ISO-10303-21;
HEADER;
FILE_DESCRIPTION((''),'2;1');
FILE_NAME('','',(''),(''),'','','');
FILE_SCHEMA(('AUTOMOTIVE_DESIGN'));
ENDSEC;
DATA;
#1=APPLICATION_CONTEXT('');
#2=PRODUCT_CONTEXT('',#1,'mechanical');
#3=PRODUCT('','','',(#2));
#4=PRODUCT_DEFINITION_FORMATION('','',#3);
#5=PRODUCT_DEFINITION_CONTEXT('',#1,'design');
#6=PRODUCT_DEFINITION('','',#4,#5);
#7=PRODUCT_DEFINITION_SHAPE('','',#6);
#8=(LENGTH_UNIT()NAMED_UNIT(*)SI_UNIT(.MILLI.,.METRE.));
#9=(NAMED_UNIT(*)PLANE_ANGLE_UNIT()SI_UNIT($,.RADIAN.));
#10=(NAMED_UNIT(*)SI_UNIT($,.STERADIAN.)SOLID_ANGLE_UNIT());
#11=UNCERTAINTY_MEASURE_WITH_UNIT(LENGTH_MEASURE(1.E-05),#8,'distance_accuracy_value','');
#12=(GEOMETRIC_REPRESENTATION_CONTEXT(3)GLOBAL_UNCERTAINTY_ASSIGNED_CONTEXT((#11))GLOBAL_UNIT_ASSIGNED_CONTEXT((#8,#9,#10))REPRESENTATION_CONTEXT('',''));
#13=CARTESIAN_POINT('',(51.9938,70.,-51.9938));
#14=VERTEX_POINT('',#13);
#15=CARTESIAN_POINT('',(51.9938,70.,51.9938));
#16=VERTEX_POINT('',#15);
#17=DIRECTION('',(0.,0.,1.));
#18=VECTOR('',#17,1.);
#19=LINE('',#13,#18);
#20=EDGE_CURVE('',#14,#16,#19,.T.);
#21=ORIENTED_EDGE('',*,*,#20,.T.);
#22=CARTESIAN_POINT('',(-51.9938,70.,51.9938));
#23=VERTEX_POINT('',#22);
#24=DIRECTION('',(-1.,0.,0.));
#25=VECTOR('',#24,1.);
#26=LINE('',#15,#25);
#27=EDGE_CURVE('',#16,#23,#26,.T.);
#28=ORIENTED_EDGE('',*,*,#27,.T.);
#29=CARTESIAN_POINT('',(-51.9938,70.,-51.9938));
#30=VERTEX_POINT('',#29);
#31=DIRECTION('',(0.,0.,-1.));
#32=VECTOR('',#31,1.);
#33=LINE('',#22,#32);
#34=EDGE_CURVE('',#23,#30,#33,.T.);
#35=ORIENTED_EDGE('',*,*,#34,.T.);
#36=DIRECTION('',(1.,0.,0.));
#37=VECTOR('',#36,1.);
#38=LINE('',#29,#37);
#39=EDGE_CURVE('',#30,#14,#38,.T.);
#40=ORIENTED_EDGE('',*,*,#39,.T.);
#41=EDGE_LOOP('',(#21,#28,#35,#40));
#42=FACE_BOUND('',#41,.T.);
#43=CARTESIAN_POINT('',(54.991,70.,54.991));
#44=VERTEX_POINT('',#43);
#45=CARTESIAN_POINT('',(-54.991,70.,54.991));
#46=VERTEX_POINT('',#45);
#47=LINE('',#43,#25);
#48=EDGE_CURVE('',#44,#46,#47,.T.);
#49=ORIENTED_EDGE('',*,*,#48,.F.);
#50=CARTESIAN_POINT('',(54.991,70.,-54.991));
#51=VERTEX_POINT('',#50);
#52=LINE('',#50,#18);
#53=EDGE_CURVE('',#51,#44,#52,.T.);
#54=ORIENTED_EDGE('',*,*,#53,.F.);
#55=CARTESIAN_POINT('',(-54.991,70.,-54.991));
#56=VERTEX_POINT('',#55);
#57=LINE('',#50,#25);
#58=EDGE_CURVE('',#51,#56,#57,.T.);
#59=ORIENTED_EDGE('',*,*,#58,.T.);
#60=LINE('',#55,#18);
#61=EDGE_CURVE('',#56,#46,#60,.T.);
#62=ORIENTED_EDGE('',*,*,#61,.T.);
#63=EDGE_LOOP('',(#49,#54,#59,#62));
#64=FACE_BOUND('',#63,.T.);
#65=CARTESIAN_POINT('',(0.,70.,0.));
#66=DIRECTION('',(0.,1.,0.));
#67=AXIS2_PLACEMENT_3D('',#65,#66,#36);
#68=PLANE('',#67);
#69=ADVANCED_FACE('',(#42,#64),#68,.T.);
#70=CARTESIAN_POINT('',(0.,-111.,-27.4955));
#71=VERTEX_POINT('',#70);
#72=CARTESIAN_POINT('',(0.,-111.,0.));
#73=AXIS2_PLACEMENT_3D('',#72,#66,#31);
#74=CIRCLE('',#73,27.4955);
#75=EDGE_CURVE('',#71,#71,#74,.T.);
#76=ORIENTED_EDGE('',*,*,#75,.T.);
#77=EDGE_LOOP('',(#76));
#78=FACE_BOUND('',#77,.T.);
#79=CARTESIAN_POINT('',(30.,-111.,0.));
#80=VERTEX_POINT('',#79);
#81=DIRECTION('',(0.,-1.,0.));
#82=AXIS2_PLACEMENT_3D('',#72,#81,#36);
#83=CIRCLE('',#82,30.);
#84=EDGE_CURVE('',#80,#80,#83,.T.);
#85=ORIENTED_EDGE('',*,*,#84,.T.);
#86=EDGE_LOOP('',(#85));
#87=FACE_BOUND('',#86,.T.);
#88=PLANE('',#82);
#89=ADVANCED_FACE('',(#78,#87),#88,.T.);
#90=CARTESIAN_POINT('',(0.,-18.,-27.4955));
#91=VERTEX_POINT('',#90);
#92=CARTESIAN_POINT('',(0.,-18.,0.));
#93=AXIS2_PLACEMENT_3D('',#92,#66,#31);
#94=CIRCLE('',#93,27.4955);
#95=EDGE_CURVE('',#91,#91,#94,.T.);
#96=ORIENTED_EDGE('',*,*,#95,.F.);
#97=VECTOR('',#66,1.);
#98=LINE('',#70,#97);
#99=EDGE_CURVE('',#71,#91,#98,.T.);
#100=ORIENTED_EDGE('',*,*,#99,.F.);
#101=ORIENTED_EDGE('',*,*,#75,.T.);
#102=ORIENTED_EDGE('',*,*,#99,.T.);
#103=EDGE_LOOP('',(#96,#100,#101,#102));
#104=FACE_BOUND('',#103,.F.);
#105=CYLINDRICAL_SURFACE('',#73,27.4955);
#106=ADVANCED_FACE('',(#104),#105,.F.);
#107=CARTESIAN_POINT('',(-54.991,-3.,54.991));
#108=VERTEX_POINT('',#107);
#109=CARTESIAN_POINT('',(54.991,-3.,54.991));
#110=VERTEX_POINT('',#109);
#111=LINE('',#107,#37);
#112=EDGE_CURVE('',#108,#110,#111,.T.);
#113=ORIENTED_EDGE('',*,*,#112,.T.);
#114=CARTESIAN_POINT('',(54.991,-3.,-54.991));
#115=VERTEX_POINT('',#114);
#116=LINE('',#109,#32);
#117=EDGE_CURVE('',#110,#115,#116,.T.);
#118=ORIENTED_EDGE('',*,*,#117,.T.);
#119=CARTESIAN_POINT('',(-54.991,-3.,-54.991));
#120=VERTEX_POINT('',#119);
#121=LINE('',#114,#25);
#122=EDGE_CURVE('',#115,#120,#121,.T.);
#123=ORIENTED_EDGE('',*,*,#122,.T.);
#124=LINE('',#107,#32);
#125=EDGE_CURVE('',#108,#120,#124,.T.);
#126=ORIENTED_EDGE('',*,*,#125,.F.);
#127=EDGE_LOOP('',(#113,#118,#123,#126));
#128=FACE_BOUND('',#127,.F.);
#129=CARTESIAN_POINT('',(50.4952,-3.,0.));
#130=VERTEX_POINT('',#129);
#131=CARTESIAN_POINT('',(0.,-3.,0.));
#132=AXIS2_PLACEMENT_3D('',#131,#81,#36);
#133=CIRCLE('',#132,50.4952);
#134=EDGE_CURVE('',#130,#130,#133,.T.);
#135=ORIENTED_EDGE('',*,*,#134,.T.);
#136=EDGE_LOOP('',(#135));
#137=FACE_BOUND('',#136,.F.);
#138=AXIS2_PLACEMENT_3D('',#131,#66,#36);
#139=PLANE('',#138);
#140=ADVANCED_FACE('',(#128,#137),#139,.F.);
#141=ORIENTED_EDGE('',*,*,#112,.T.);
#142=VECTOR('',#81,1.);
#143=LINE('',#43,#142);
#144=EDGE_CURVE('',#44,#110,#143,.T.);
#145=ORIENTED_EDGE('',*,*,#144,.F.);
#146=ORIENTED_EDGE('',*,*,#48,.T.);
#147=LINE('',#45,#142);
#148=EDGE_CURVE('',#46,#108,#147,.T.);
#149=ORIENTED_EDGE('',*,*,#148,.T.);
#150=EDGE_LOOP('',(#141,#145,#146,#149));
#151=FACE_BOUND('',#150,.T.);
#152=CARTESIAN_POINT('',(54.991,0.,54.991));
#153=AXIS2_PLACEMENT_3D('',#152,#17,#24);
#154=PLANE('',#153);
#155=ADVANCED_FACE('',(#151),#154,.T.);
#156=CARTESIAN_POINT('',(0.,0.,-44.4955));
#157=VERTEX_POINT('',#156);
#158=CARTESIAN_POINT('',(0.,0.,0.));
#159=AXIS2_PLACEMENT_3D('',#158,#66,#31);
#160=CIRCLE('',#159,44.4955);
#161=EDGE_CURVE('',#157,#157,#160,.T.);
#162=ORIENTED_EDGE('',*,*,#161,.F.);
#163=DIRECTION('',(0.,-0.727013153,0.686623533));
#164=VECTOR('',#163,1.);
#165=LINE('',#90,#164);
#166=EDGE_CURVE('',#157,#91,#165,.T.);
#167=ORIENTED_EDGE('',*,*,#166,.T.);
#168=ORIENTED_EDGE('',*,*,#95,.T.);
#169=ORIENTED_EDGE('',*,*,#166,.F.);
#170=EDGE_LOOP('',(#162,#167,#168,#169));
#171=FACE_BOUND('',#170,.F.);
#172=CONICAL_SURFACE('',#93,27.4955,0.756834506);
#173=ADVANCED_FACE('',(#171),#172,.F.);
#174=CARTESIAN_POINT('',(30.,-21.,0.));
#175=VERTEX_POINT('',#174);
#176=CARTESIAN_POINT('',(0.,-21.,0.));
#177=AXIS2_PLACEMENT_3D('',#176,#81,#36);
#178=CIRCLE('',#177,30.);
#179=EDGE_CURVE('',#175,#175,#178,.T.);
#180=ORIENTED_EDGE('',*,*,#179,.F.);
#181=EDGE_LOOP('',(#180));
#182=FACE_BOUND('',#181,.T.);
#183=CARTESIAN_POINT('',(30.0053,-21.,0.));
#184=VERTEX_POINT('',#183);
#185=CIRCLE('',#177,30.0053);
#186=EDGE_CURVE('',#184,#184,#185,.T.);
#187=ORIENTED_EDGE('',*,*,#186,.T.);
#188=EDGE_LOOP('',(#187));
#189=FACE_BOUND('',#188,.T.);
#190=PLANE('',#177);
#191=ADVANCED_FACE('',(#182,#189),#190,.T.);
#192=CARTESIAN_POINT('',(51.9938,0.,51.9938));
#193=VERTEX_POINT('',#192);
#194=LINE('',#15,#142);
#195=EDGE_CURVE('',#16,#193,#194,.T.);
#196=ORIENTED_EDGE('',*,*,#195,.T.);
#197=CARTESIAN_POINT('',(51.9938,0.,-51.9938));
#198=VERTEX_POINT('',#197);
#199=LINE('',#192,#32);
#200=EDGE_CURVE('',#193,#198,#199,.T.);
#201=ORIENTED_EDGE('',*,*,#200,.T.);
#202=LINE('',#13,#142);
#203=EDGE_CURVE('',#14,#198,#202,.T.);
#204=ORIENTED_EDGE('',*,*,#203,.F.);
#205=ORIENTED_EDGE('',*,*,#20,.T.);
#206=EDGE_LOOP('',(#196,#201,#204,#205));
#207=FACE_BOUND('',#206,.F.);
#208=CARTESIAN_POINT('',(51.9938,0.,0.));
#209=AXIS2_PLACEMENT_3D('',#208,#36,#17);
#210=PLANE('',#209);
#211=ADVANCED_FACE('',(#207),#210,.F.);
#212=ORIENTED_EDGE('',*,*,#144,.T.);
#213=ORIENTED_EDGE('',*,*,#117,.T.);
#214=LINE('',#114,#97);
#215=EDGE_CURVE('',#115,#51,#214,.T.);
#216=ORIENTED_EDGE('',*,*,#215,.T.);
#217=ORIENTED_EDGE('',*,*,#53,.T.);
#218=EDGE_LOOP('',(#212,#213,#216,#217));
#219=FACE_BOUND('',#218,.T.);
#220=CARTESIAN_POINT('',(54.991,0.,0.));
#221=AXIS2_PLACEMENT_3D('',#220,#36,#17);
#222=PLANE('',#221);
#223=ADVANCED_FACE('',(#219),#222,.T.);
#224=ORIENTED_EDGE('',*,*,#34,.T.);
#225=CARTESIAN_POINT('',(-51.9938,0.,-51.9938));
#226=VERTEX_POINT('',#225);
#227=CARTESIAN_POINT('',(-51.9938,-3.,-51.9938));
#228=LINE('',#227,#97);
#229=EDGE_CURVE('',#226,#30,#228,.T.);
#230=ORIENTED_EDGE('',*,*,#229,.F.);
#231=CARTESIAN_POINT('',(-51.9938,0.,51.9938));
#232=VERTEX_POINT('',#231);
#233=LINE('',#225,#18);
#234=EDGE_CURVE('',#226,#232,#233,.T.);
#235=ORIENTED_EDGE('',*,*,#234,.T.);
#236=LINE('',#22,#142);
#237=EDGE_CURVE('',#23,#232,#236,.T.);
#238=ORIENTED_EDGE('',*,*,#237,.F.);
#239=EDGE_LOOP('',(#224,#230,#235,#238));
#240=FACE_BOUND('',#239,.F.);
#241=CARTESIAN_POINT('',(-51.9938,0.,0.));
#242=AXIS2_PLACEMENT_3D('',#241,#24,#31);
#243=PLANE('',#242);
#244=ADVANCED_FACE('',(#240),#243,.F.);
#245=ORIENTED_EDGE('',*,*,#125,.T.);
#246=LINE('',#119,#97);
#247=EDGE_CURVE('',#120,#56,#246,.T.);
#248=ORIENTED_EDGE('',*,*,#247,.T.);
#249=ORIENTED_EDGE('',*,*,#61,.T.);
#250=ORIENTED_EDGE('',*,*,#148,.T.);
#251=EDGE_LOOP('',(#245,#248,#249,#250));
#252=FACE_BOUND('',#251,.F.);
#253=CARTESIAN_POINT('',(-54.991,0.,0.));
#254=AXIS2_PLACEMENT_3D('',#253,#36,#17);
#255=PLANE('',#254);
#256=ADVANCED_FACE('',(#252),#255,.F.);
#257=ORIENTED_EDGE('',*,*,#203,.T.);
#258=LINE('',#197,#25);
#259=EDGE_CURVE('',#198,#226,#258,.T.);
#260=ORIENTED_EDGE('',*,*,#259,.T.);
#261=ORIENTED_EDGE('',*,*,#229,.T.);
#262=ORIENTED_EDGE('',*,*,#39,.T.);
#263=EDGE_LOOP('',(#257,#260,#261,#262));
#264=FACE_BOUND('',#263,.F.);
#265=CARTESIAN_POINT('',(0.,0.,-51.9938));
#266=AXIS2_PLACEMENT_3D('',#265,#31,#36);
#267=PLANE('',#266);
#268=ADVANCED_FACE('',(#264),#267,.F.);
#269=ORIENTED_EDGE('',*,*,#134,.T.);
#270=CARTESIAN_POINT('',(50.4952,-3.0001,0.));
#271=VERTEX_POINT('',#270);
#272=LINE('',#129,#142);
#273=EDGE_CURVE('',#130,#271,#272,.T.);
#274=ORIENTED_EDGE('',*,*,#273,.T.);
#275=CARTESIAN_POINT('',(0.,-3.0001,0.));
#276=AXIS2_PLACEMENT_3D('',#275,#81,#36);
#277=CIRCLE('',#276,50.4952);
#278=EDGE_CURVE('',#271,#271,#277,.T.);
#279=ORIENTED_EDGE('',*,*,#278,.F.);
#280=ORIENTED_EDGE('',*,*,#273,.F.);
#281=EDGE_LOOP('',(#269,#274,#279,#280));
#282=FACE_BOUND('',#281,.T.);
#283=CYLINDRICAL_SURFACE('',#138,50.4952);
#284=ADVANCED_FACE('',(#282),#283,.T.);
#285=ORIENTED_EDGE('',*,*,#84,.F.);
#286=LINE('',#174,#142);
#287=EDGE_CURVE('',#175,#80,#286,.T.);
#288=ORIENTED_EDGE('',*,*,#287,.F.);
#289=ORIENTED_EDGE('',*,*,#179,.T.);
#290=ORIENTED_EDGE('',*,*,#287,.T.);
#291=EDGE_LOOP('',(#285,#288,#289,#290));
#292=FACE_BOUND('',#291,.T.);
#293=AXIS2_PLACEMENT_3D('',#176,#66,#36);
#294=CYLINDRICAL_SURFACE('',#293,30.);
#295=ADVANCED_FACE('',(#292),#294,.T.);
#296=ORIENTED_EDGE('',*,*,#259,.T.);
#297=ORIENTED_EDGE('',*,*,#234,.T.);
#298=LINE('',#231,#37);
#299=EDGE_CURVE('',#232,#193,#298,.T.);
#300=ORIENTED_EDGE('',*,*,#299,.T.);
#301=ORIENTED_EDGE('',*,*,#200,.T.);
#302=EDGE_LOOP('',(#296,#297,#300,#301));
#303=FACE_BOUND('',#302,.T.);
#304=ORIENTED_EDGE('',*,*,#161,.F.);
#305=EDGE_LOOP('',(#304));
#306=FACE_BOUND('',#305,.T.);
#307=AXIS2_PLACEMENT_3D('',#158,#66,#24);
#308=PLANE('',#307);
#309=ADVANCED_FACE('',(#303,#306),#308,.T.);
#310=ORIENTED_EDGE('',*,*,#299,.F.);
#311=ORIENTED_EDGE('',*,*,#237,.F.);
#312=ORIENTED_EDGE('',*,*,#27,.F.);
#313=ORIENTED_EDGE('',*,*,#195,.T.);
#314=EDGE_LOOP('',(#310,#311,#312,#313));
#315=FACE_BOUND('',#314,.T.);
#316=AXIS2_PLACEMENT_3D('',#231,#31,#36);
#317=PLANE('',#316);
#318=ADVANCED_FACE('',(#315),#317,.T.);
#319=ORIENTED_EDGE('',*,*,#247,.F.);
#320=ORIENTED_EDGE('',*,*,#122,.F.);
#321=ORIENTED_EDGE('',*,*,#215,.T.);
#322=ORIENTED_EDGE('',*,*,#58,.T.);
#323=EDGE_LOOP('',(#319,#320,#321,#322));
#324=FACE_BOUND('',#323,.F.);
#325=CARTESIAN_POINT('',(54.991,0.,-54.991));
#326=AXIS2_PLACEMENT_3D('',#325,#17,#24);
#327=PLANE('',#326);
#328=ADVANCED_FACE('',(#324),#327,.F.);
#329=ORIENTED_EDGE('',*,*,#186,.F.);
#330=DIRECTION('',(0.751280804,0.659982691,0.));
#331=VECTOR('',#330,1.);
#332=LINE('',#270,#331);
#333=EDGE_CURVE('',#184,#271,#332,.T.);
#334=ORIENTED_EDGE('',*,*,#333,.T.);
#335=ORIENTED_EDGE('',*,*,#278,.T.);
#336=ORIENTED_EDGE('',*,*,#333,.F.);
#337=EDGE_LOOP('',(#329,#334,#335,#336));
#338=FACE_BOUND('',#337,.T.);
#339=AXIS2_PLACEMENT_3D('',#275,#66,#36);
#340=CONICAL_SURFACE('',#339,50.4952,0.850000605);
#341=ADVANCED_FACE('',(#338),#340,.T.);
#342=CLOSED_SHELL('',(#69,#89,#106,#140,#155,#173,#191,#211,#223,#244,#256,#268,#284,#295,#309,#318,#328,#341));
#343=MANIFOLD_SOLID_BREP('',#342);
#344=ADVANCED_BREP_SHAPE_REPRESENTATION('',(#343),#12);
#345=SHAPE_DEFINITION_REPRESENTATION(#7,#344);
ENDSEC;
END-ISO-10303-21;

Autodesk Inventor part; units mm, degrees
ref_plane "YZ Plane" through (0, 0, 0) normal (1, 0, 0) x (0, 1, 0)
ref_plane "XZ Plane" through (0, 0, 0) normal (0, 1, 0) x (-1, 0, 0)
ref_plane "XY Plane" through (0, 0, 0) normal (0, 0, 1) x (1, 0, 0)
sketch "Sketch1" plane through (0, 0, 0) normal (0, 1, 0) x (-1, 0, 0)
  line L0 (-51.9938, 0) -> (-51.9938, 51.9938)
  line L1 (-51.9938, 51.9938) -> (0, 51.9938)
  line L2 (51.9938, 0) -> (51.9938, -51.9938)
  line L3 (51.9938, -51.9938) -> (0, -51.9938)
  line L4 (-51.9938, 0) -> (-51.9938, 51.9938)
  line L5 (-51.9938, 51.9938) -> (0, 51.9938)
  line L6 (-51.9938, 0) -> (-51.9938, -51.9938)
  line L7 (-51.9938, -51.9938) -> (0, -51.9938)
  line L8 (51.9938, 0) -> (51.9938, 51.9938)
  line L9 (51.9938, 51.9938) -> (0, 51.9938)
  point P0 (0, 0)
  dimension "d0" = 51.9938
  dimension "d1" = 51.9938
  dimension "d2" = 51.9938
  dimension "d3" = 51.9938
  dimension "d4" = 51.9938
  dimension "d5" = 51.9938
  dimension "d6" = 51.9938
  dimension "d7" = 51.9938
  dimension "d8" = 51.9938
  dimension "d9" = 51.9938
extrude "Extrusion1" add sketch "Sketch1" against normal blind 3
sketch "Sketch2" plane through (0, 0, 0) normal (0, 1, 0) x (1, 0, 0)
  line L0 (54.991, 0) -> (54.991, -54.991)
  line L1 (54.991, -54.991) -> (0, -54.991)
  line L2 (-54.991, 0) -> (-54.991, -54.991)
  line L3 (-54.991, -54.991) -> (0, -54.991)
  line L4 (-54.991, 0) -> (-54.991, 54.991)
  line L5 (-54.991, 54.991) -> (0, 54.991)
  line L6 (54.991, 0) -> (54.991, 54.991)
  line L7 (54.991, 54.991) -> (0, 54.991)
  line L8 (-51.9938, 51.9938) -> (51.9938, 51.9938) projected
  line L9 (51.9938, 0) -> (51.9938, 51.9938)
  line L10 (51.9938, 51.9938) -> (0, 51.9938)
  line L11 (51.9938, 0) -> (51.9938, -51.9938)
  line L12 (51.9938, -51.9938) -> (0, -51.9938)
  line L13 (-51.9938, 0) -> (-51.9938, -51.9938)
  line L14 (-51.9938, -51.9938) -> (0, -51.9938)
  line L15 (-51.9938, 0) -> (-51.9938, 51.9938)
  line L16 (-51.9938, 51.9938) -> (0, 51.9938)
  point P0 (0, 0)
  dimension "d14" = 54.991
  dimension "d15" = 54.991
  dimension "d16" = 54.991
  dimension "d17" = 54.991
  dimension "d18" = 54.991
  dimension "d19" = 54.991
  dimension "d20" = 51.9938
  dimension "d21" = 51.9938
  dimension "d22" = 51.9938
  dimension "d23" = 51.9938
  dimension "d24" = 51.9938
  dimension "d25" = 51.9938
  dimension "d26" = 51.9938
  dimension "d27" = 51.9938
extrude "Extrusion2" add sketch "Sketch2" along normal blind 70 and the other way blind 3
sketch "Sketch3" plane through (0, -3, 0) normal (0, -1, 0) x (1, 0, 0)
  circle A0 centre (0, 0) radius 50.4952
  dimension "d32" = 100.9904
extrude "Extrusion3" add sketch "Sketch3" along normal blind 18
sketch "Sketch4" plane through (0, -21, 0) normal (0, -1, 0) x (1, 0, 0)
  circle A0 centre (0, 0) radius 30
  dimension "d35" = 60
extrude "Extrusion4" add sketch "Sketch4" along normal blind 90
sketch "Sketch6" plane through (0, -111, 0) normal (0, -1, 0) x (1, 0, 0)
  circle A0 centre (0, 0) radius 27.4955
  dimension "d39" = 54.991
hole "Hole1" at (0, -111, 0) direction (0, 1, 0) diameter 54.991 depth 111
chamfer "Chamfer1" distance 20.49 distance2 18 1 edges at (-50.4952, -21, 0) measured on face at (-21.4731, -21, -37.7754)
chamfer "Chamfer2" distance 17 distance2 18 1 edges at (0, 0, 27.4955) measured on face at (-43.7609, 0, -1.1047)
properties part number "PMT housing"
